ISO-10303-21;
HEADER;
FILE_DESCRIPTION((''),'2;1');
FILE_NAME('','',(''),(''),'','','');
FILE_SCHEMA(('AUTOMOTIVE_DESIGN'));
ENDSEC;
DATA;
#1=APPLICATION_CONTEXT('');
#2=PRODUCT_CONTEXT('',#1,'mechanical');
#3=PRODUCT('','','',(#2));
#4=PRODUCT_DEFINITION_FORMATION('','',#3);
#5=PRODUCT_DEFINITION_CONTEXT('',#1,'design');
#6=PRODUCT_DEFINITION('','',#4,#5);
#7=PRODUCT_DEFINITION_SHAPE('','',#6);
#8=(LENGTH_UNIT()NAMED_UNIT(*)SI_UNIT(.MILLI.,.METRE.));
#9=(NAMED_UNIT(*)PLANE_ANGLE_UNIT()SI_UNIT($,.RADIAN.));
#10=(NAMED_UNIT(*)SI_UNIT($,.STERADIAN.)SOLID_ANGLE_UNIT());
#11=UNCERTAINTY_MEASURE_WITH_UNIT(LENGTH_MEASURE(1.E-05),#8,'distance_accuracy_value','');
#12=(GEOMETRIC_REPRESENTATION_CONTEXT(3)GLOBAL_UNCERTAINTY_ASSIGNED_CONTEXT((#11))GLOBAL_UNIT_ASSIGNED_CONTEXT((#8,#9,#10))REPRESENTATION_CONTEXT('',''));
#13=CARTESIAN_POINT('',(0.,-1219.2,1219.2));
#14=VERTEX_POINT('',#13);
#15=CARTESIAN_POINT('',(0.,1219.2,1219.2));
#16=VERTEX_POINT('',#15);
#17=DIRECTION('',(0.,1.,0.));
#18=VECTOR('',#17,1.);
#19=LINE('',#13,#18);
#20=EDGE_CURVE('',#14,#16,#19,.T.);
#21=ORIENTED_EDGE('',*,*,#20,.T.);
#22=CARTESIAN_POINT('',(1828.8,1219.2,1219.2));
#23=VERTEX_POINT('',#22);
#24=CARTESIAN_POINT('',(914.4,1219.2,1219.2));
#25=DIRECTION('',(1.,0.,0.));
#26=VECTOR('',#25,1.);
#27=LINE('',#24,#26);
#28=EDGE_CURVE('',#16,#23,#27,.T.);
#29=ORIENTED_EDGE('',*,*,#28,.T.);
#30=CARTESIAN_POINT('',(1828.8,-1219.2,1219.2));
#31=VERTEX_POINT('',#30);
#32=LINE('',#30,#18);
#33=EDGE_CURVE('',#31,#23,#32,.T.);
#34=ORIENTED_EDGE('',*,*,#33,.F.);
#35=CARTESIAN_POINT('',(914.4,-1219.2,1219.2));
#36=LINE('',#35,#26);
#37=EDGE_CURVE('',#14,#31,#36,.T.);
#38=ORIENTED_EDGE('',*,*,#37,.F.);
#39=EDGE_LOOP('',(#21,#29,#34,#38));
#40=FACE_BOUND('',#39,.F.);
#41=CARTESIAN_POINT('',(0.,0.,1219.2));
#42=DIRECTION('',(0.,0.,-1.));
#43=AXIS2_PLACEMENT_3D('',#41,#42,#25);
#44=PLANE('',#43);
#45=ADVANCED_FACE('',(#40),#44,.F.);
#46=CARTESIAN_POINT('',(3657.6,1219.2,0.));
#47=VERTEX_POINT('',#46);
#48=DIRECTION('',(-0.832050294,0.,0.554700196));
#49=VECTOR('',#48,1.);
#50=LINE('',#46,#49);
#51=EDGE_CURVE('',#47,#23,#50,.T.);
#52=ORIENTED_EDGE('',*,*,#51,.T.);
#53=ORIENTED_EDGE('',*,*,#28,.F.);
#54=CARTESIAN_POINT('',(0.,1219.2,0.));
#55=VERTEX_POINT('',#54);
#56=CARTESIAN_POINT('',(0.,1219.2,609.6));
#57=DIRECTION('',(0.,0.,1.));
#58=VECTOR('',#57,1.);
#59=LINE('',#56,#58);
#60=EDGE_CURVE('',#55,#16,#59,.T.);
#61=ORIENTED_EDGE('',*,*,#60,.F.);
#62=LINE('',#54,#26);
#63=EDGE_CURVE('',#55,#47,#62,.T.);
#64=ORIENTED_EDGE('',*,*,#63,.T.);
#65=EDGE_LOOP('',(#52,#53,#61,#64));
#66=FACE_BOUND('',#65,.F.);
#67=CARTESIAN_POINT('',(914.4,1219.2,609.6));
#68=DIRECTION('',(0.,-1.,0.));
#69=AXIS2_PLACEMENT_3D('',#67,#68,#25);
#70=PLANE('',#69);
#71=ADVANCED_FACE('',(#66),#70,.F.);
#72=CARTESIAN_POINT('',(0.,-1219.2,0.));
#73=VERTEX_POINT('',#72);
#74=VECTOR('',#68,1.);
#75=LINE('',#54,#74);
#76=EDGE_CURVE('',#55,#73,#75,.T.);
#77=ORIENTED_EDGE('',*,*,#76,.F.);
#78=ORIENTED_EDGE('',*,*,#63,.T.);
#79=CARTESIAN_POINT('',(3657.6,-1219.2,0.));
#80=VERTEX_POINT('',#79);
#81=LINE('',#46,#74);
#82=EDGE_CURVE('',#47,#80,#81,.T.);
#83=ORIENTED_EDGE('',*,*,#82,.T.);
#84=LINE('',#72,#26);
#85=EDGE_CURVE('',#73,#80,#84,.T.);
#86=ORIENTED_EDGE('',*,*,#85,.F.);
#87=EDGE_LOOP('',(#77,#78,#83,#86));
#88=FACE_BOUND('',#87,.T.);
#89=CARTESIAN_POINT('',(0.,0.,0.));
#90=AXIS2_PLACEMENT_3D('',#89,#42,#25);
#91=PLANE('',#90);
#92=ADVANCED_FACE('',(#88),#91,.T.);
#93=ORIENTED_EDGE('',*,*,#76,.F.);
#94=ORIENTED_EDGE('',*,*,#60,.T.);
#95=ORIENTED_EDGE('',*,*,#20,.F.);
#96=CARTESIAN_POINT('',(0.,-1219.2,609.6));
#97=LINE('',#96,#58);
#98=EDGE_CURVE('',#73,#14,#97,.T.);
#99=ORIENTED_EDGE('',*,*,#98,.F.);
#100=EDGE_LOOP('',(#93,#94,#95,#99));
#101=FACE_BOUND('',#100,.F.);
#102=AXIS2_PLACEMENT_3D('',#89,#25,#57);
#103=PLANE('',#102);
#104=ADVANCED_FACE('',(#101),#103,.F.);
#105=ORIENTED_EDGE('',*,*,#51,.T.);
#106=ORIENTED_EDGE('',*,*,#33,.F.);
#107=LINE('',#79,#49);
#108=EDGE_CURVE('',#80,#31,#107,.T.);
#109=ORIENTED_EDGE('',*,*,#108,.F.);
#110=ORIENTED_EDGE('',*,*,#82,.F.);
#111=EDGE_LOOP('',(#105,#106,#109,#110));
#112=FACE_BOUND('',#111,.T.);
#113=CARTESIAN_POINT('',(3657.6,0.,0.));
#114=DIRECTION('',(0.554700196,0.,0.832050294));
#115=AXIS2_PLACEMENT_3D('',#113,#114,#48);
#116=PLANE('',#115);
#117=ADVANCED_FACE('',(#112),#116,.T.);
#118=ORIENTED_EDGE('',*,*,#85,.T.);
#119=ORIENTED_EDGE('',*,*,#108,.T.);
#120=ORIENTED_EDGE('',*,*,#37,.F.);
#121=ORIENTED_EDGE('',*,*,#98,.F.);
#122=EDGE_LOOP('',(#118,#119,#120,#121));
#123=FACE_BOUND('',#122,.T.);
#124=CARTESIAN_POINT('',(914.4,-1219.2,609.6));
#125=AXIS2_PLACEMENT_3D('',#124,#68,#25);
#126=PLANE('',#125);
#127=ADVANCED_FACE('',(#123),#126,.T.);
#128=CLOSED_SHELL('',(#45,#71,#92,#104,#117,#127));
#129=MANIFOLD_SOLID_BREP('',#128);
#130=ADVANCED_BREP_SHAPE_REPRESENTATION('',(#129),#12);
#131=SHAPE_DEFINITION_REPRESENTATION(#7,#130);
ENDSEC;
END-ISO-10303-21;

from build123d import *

# Parameters (mm, degrees)
F0_W     = 1828.8
F0_H     = 1219.2
F1_DEPTH = 1219.2


# Not quite as in the source:
# - a feature names something its author has since deleted; it is built from what else it names


with BuildPart() as f1:
    # F0 (on Front) → F1 (new body, symmetric)
    with BuildSketch(Plane.XZ):
        with Locations((914.4, 609.6)):
            Rectangle(F0_W, F0_H)
        Polygon((1828.8, 1219.2), (1828.8, 0), (3657.6, 0), align=None)
    extrude(amount=F1_DEPTH, both=True)


solid = f1.part
